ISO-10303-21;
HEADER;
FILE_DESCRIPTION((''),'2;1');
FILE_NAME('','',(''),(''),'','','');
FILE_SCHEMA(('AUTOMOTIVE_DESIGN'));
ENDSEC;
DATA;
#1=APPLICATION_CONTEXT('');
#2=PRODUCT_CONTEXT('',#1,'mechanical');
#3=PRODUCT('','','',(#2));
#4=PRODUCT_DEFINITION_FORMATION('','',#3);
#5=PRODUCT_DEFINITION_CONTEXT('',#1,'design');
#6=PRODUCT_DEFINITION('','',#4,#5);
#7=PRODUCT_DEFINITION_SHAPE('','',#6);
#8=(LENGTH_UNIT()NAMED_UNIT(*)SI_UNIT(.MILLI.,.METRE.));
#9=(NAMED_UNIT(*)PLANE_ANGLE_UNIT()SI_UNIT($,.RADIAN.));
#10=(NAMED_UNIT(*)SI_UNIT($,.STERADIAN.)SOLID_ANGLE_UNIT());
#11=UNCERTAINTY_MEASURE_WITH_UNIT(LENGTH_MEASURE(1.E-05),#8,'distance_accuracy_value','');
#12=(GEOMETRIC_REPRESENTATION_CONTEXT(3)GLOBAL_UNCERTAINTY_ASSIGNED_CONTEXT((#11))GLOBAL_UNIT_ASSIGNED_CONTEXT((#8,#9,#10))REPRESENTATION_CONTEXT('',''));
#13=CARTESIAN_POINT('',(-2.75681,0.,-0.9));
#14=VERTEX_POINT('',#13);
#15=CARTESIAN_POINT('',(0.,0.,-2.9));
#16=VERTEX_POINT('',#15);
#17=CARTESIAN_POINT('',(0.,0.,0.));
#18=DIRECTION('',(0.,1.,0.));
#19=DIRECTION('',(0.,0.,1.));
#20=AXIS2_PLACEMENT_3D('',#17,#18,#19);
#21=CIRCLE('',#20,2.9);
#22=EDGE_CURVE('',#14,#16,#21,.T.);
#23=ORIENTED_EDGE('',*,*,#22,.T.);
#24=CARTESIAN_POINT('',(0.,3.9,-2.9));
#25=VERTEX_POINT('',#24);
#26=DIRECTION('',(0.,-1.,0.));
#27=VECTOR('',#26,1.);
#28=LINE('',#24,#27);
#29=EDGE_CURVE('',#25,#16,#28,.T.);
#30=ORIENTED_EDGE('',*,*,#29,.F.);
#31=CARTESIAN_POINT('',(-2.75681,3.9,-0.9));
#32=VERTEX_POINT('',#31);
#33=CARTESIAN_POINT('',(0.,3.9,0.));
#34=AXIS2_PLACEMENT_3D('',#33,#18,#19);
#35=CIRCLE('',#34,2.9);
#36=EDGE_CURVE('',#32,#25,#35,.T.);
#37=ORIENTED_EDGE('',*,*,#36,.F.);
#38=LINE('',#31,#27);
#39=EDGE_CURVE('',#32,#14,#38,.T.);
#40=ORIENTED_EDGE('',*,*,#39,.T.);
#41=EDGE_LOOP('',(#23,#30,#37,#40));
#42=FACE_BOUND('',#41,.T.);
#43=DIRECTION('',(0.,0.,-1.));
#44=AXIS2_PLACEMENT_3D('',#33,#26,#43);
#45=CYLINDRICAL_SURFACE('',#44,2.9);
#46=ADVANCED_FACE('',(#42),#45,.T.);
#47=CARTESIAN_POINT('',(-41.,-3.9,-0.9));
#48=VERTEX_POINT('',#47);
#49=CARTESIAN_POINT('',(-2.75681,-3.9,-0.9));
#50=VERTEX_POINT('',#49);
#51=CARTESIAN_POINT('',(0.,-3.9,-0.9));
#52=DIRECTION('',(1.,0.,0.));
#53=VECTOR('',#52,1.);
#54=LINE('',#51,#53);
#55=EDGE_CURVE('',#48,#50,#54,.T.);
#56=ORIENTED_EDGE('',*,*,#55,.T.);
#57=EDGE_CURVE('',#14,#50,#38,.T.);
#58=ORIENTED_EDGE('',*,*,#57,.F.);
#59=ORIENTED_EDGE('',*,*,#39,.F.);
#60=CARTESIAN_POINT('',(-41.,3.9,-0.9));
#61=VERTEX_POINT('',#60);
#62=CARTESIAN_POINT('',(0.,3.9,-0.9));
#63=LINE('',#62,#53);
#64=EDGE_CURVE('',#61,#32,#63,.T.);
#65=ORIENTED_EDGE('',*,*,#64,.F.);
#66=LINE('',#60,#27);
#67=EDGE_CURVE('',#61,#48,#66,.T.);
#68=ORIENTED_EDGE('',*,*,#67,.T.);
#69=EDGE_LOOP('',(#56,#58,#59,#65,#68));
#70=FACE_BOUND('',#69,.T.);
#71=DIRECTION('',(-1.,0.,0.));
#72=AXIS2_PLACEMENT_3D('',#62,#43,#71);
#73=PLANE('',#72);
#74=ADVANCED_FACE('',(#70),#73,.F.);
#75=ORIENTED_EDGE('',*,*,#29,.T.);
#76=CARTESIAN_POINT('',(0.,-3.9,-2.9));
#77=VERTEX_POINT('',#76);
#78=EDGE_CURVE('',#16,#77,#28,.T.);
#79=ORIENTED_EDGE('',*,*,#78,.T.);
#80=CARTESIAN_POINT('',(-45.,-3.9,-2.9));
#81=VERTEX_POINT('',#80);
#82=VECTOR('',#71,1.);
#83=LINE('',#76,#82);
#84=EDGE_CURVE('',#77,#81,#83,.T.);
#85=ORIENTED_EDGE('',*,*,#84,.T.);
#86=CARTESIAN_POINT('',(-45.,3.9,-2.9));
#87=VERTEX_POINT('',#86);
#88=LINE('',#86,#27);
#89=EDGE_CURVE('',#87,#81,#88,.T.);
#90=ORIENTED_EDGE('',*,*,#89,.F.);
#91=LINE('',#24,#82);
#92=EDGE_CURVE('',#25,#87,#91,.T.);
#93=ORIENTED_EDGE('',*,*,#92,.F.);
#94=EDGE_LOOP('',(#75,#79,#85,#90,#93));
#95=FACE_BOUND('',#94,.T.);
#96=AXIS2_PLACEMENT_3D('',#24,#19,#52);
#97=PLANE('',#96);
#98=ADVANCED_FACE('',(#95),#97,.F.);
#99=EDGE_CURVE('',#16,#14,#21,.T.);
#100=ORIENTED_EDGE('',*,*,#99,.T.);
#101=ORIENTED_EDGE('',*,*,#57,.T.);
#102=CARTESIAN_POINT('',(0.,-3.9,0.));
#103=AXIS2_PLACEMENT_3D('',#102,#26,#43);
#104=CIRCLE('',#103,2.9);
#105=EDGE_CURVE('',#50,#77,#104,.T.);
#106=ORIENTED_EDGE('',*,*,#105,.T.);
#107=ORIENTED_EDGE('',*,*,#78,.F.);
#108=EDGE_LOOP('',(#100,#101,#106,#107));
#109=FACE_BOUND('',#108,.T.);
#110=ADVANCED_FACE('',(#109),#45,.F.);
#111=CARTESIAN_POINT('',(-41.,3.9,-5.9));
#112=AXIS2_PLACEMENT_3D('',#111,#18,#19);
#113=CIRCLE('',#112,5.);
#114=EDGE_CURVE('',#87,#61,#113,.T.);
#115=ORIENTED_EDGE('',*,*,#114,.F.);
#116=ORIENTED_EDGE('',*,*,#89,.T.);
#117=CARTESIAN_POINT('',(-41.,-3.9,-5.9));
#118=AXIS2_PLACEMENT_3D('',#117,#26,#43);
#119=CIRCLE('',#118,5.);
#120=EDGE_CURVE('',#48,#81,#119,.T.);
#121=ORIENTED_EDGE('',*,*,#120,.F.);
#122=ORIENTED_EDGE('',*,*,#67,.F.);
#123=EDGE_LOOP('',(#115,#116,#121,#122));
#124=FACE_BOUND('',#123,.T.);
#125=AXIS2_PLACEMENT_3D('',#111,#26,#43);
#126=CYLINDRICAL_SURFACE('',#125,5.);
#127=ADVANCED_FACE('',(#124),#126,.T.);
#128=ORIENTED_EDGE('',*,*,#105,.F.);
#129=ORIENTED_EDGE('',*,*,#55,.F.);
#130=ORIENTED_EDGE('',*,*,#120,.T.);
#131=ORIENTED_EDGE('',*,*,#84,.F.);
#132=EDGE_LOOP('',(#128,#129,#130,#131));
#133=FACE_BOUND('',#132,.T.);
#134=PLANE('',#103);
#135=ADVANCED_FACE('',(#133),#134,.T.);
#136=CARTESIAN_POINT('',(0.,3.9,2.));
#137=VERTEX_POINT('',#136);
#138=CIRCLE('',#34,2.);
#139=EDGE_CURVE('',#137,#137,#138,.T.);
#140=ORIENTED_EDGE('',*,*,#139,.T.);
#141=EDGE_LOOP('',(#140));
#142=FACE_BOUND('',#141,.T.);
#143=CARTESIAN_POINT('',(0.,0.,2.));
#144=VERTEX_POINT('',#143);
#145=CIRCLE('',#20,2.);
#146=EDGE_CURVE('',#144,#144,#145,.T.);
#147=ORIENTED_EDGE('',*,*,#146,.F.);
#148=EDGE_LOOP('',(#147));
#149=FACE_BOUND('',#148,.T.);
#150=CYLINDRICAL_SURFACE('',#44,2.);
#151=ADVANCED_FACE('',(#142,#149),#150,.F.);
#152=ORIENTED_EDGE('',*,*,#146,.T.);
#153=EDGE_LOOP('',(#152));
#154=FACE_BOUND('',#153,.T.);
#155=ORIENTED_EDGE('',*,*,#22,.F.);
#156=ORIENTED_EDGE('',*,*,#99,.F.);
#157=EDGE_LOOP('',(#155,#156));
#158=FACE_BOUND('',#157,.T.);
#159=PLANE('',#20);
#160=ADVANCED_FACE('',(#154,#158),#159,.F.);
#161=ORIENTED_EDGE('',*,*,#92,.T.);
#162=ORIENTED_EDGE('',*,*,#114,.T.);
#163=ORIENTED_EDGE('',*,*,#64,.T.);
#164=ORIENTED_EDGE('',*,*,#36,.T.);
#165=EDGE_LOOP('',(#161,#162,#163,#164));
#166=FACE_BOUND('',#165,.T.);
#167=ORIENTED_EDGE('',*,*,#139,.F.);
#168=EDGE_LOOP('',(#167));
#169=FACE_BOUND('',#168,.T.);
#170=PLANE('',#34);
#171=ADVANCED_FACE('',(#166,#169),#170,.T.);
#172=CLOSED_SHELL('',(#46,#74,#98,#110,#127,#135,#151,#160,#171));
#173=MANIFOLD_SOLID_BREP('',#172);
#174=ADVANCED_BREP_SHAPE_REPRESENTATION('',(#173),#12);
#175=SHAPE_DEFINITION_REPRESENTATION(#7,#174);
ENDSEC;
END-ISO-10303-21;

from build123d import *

# Parameters (mm, degrees)
CROQUIS1_R                   = 2.9
CROQUIS1_R_2                 = 2
SALIENTE_EXTRUIR1_DEPTH      = 3.9
SALIENTE_EXTRUIR2_DEPTH      = 3.9
SALIENTE_EXTRUIR2_DEPTH_BACK = 3.9
REDONDEO1_R                  = 5


with BuildPart() as part:
    # Croquis1 → Saliente-Extruir1 (new body)
    with BuildSketch(Plane(origin=(0, 0, 0), x_dir=(1, 0, 0), z_dir=(0, 1, 0))):
        with Locations(Location((0, 0, 0), (0, 0, 270))):
            Circle(CROQUIS1_R)
        with Locations(Location((0, 0, 0), (0, 0, 270))):
            Circle(CROQUIS1_R_2, mode=Mode.SUBTRACT)
    extrude(amount=SALIENTE_EXTRUIR1_DEPTH)

    # Croquis2 → Saliente-Extruir2 (add, two sides: drawn at the far end of the back side and taken through both)
    with BuildSketch(Plane.XZ.offset(-SALIENTE_EXTRUIR2_DEPTH_BACK)):
        with BuildLine():
            Line((-45, -2.9), (0, -2.9))
            ThreePointArc((0, -2.9), (-1.702938637, -2.347338919), (-2.75680975, -0.9))
            Line((-2.75680975, -0.9), (-45, -0.9))
            Line((-45, -0.9), (-45, -2.9))
        make_face()
    extrude(amount=SALIENTE_EXTRUIR2_DEPTH + SALIENTE_EXTRUIR2_DEPTH_BACK)

    # Redondeo1
    # the kernel refuses this fillet: 5 mm, written as the material it takes off along each edge
    with BuildSketch(Plane(origin=(-45, 13.9, -0.9), x_dir=(0, 0, -1), z_dir=(0, -1, 0))) as redondeo1_piece_1:
        with BuildLine():
            CenterArc((5, 4), REDONDEO1_R, 180, 53.130102354)
            Line((0, 4), (-0.1, 4))
            Line((-0.1, 4), (-0.1, 0))
            Line((-0.1, 0), (0, -0.1))
            ThreePointArc((0, -0.1), (1, -0.1), (1.94, -0.08))
            Line((1.94, -0.08), (2, 0))
        make_face()
    extrude(amount=27.8, mode=Mode.SUBTRACT)


solid = part.part
